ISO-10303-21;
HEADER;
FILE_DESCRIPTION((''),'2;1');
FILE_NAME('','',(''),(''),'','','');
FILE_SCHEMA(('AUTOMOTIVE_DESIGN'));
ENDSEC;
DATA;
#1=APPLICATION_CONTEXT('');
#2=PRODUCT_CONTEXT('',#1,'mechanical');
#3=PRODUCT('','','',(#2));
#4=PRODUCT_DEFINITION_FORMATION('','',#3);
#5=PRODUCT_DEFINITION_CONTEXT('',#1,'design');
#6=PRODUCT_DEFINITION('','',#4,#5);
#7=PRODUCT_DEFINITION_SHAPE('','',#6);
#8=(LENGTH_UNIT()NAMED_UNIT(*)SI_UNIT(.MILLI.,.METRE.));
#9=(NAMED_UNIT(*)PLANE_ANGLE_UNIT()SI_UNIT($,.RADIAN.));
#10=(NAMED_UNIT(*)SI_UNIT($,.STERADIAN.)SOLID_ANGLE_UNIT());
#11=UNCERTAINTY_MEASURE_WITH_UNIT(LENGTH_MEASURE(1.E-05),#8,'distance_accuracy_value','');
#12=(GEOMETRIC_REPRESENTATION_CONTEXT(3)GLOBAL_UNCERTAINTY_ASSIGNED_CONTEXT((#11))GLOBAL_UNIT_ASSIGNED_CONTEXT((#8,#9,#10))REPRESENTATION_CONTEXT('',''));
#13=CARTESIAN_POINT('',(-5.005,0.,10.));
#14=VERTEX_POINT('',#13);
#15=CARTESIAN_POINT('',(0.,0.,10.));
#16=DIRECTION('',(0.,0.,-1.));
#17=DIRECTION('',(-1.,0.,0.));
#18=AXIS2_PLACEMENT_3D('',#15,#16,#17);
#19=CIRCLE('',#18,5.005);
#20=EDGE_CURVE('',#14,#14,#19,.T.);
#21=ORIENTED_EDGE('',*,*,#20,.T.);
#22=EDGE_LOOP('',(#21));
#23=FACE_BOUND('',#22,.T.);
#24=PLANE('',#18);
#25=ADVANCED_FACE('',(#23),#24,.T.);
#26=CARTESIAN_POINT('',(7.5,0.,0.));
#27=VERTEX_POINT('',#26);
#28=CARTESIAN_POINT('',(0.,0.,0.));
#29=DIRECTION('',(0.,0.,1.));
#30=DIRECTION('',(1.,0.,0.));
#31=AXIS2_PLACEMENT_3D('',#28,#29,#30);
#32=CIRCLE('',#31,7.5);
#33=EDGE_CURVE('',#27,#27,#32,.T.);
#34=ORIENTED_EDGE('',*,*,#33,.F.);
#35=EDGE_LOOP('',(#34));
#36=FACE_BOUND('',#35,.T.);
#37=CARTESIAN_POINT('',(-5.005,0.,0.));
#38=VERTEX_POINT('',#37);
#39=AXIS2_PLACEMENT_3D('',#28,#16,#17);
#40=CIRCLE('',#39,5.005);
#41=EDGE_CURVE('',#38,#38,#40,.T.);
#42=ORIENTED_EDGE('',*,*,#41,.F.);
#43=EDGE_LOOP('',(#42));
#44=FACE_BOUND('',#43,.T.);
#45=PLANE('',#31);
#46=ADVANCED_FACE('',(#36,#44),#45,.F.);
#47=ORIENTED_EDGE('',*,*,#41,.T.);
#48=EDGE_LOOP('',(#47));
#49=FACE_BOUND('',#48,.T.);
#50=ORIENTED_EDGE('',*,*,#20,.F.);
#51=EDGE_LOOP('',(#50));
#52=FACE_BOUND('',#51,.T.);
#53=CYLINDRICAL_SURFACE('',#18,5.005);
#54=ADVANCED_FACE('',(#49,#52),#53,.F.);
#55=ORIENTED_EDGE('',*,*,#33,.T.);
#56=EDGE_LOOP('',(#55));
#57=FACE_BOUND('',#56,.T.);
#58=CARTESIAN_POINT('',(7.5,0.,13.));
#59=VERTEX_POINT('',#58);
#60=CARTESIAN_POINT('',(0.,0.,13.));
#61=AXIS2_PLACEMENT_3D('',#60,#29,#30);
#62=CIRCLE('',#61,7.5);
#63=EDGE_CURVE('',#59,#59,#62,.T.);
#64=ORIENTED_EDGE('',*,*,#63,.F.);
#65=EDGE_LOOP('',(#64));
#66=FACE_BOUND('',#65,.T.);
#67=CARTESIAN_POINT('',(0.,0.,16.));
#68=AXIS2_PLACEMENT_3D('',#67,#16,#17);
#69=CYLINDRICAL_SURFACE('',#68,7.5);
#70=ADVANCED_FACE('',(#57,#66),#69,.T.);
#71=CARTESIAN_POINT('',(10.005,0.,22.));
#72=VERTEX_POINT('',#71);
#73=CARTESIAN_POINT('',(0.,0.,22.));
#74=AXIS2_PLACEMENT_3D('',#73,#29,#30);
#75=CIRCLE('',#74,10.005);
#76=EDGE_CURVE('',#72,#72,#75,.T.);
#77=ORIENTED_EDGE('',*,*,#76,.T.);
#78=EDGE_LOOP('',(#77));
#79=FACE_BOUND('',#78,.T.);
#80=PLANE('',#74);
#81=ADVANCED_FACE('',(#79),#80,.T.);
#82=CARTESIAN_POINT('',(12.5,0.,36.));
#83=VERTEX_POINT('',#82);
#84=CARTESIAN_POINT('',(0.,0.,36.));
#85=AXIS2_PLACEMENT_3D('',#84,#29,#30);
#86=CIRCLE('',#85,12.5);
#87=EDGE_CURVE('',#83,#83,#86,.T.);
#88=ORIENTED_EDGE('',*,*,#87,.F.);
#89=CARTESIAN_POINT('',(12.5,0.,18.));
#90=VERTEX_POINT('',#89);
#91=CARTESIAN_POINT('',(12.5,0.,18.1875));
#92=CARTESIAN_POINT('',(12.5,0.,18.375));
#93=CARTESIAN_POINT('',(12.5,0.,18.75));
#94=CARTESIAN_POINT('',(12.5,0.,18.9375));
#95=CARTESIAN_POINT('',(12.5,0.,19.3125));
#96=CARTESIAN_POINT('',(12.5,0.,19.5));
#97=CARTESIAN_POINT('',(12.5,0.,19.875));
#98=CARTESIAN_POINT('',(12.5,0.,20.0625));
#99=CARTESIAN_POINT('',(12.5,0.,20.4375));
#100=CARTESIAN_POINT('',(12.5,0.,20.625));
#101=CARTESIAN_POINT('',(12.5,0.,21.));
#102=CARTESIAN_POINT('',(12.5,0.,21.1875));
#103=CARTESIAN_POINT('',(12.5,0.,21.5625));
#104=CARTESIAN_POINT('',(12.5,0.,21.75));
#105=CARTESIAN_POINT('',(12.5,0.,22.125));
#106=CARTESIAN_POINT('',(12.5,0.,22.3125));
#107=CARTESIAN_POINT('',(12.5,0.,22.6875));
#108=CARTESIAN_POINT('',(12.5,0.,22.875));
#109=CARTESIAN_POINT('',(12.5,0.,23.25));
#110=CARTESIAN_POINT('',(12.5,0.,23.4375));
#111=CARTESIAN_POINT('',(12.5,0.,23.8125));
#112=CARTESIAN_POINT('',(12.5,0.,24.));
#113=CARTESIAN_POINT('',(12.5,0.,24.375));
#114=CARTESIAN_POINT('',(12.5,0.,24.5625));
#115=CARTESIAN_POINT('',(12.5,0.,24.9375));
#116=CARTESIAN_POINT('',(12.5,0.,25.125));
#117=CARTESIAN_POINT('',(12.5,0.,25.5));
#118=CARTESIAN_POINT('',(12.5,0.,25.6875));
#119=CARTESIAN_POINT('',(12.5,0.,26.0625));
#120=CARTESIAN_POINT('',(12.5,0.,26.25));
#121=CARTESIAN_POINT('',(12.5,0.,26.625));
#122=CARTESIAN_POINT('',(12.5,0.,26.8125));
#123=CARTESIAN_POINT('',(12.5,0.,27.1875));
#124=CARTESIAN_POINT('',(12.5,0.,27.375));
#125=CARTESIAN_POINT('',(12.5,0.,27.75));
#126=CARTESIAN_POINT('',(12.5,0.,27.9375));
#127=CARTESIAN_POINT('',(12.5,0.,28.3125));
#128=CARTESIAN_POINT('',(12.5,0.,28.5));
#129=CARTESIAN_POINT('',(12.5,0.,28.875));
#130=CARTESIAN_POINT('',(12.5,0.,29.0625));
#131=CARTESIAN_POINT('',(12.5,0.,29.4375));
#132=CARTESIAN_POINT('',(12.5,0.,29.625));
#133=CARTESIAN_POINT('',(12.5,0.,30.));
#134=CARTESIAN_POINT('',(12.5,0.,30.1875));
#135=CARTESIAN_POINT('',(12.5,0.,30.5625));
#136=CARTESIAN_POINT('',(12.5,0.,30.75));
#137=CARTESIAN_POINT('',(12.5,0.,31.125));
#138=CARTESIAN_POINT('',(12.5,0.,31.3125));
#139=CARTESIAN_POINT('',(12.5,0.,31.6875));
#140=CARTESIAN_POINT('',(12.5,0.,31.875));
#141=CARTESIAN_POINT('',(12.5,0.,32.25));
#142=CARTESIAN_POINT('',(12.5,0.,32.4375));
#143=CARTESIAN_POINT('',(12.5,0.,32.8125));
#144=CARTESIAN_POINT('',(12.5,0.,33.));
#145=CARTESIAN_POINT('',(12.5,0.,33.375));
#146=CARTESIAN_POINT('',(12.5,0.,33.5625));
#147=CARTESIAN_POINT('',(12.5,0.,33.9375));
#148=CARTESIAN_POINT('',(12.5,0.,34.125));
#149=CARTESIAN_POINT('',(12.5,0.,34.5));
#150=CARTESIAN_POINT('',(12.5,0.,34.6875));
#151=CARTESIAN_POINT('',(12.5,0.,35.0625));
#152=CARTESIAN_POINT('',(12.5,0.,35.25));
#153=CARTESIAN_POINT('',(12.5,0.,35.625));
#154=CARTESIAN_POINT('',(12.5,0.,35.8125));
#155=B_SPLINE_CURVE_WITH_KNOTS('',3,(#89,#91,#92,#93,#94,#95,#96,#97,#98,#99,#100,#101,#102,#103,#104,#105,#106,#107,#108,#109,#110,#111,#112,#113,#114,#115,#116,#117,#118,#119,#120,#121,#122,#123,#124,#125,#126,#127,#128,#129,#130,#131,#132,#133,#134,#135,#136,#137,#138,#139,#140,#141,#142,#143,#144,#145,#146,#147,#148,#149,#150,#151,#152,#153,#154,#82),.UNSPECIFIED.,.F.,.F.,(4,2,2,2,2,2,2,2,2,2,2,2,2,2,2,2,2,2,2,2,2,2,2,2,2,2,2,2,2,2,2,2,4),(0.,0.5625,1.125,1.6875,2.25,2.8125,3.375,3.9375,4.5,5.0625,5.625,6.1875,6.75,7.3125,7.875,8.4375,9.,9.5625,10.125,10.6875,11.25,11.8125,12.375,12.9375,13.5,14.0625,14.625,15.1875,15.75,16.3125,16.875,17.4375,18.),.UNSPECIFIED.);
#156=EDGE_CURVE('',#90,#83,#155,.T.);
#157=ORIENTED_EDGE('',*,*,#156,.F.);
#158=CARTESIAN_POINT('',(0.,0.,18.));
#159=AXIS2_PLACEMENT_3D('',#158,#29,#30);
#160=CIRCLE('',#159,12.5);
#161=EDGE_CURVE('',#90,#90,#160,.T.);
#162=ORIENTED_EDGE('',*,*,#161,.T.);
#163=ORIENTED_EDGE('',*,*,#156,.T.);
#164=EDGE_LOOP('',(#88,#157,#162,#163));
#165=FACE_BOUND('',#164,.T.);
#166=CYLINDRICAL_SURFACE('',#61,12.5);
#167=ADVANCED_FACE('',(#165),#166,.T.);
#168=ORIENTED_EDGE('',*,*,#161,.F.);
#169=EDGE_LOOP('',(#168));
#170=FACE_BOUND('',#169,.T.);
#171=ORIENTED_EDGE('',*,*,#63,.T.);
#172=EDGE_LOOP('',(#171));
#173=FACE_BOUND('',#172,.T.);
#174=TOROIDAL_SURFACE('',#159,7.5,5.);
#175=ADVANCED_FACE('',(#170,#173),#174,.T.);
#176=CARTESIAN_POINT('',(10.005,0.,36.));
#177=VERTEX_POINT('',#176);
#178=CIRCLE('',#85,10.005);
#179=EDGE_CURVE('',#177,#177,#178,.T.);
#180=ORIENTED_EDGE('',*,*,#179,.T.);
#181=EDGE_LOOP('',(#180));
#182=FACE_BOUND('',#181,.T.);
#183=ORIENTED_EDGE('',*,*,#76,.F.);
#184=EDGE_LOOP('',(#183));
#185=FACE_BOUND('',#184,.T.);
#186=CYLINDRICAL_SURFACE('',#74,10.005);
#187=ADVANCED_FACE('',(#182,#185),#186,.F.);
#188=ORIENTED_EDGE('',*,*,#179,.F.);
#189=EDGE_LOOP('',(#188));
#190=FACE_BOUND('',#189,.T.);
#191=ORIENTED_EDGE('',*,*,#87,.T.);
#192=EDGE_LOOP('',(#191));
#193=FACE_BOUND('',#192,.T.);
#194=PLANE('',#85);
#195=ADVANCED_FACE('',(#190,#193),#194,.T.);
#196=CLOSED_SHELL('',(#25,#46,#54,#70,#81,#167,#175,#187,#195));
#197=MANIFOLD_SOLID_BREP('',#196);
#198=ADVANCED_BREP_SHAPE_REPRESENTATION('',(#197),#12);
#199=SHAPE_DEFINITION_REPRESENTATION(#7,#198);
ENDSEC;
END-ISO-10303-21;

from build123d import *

# Parameters (mm, degrees)
SKETCH1_R                = 7.5
BOSS_EXTRUDE1_DEPTH      = 16
BOSS_EXTRUDE2_DEPTH      = 16
BOSS_EXTRUDE2_DEPTH_BACK = 7
SKETCH2_R                = 12.5
FILLET1_R                = 5
SKETCH4_R                = 10.005
CUT_EXTRUDE1_DEPTH       = 14
SKETCH3_R                = 5.005
CUT_EXTRUDE2_DEPTH       = 10


with BuildPart() as part:
    # Sketch1 → Boss-Extrude1 (new body)
    with BuildSketch(Plane.XY):
        Circle(SKETCH1_R)
    extrude(amount=BOSS_EXTRUDE1_DEPTH)

    # Sketch2 → Boss-Extrude2 (add, two sides: drawn at the far end of the back side and taken through both)
    with BuildSketch(Plane.XY.offset(20).offset(-BOSS_EXTRUDE2_DEPTH_BACK)):
        Circle(SKETCH2_R)
    extrude(amount=BOSS_EXTRUDE2_DEPTH + BOSS_EXTRUDE2_DEPTH_BACK)

    # Fillet1
    fillet1_edges = [part.edges().sort_by_distance(p)[0] for p in [
        (-12.5, 0, 13),
    ]]
    fillet(fillet1_edges, radius=FILLET1_R - 0.0001)  # a hair under: the kernel refuses the full size

    # Sketch4 → Cut-Extrude1 (cut)
    with BuildSketch(Plane.XY.offset(36)):
        Circle(SKETCH4_R)
    extrude(amount=-CUT_EXTRUDE1_DEPTH, mode=Mode.SUBTRACT)

    # Sketch3 → Cut-Extrude2 (cut)
    with BuildSketch(Plane(origin=(0, 0, 0), x_dir=(-1, 0, 0), z_dir=(0, 0, -1))):
        Circle(SKETCH3_R)
    extrude(amount=-CUT_EXTRUDE2_DEPTH, mode=Mode.SUBTRACT)


solid = part.part
